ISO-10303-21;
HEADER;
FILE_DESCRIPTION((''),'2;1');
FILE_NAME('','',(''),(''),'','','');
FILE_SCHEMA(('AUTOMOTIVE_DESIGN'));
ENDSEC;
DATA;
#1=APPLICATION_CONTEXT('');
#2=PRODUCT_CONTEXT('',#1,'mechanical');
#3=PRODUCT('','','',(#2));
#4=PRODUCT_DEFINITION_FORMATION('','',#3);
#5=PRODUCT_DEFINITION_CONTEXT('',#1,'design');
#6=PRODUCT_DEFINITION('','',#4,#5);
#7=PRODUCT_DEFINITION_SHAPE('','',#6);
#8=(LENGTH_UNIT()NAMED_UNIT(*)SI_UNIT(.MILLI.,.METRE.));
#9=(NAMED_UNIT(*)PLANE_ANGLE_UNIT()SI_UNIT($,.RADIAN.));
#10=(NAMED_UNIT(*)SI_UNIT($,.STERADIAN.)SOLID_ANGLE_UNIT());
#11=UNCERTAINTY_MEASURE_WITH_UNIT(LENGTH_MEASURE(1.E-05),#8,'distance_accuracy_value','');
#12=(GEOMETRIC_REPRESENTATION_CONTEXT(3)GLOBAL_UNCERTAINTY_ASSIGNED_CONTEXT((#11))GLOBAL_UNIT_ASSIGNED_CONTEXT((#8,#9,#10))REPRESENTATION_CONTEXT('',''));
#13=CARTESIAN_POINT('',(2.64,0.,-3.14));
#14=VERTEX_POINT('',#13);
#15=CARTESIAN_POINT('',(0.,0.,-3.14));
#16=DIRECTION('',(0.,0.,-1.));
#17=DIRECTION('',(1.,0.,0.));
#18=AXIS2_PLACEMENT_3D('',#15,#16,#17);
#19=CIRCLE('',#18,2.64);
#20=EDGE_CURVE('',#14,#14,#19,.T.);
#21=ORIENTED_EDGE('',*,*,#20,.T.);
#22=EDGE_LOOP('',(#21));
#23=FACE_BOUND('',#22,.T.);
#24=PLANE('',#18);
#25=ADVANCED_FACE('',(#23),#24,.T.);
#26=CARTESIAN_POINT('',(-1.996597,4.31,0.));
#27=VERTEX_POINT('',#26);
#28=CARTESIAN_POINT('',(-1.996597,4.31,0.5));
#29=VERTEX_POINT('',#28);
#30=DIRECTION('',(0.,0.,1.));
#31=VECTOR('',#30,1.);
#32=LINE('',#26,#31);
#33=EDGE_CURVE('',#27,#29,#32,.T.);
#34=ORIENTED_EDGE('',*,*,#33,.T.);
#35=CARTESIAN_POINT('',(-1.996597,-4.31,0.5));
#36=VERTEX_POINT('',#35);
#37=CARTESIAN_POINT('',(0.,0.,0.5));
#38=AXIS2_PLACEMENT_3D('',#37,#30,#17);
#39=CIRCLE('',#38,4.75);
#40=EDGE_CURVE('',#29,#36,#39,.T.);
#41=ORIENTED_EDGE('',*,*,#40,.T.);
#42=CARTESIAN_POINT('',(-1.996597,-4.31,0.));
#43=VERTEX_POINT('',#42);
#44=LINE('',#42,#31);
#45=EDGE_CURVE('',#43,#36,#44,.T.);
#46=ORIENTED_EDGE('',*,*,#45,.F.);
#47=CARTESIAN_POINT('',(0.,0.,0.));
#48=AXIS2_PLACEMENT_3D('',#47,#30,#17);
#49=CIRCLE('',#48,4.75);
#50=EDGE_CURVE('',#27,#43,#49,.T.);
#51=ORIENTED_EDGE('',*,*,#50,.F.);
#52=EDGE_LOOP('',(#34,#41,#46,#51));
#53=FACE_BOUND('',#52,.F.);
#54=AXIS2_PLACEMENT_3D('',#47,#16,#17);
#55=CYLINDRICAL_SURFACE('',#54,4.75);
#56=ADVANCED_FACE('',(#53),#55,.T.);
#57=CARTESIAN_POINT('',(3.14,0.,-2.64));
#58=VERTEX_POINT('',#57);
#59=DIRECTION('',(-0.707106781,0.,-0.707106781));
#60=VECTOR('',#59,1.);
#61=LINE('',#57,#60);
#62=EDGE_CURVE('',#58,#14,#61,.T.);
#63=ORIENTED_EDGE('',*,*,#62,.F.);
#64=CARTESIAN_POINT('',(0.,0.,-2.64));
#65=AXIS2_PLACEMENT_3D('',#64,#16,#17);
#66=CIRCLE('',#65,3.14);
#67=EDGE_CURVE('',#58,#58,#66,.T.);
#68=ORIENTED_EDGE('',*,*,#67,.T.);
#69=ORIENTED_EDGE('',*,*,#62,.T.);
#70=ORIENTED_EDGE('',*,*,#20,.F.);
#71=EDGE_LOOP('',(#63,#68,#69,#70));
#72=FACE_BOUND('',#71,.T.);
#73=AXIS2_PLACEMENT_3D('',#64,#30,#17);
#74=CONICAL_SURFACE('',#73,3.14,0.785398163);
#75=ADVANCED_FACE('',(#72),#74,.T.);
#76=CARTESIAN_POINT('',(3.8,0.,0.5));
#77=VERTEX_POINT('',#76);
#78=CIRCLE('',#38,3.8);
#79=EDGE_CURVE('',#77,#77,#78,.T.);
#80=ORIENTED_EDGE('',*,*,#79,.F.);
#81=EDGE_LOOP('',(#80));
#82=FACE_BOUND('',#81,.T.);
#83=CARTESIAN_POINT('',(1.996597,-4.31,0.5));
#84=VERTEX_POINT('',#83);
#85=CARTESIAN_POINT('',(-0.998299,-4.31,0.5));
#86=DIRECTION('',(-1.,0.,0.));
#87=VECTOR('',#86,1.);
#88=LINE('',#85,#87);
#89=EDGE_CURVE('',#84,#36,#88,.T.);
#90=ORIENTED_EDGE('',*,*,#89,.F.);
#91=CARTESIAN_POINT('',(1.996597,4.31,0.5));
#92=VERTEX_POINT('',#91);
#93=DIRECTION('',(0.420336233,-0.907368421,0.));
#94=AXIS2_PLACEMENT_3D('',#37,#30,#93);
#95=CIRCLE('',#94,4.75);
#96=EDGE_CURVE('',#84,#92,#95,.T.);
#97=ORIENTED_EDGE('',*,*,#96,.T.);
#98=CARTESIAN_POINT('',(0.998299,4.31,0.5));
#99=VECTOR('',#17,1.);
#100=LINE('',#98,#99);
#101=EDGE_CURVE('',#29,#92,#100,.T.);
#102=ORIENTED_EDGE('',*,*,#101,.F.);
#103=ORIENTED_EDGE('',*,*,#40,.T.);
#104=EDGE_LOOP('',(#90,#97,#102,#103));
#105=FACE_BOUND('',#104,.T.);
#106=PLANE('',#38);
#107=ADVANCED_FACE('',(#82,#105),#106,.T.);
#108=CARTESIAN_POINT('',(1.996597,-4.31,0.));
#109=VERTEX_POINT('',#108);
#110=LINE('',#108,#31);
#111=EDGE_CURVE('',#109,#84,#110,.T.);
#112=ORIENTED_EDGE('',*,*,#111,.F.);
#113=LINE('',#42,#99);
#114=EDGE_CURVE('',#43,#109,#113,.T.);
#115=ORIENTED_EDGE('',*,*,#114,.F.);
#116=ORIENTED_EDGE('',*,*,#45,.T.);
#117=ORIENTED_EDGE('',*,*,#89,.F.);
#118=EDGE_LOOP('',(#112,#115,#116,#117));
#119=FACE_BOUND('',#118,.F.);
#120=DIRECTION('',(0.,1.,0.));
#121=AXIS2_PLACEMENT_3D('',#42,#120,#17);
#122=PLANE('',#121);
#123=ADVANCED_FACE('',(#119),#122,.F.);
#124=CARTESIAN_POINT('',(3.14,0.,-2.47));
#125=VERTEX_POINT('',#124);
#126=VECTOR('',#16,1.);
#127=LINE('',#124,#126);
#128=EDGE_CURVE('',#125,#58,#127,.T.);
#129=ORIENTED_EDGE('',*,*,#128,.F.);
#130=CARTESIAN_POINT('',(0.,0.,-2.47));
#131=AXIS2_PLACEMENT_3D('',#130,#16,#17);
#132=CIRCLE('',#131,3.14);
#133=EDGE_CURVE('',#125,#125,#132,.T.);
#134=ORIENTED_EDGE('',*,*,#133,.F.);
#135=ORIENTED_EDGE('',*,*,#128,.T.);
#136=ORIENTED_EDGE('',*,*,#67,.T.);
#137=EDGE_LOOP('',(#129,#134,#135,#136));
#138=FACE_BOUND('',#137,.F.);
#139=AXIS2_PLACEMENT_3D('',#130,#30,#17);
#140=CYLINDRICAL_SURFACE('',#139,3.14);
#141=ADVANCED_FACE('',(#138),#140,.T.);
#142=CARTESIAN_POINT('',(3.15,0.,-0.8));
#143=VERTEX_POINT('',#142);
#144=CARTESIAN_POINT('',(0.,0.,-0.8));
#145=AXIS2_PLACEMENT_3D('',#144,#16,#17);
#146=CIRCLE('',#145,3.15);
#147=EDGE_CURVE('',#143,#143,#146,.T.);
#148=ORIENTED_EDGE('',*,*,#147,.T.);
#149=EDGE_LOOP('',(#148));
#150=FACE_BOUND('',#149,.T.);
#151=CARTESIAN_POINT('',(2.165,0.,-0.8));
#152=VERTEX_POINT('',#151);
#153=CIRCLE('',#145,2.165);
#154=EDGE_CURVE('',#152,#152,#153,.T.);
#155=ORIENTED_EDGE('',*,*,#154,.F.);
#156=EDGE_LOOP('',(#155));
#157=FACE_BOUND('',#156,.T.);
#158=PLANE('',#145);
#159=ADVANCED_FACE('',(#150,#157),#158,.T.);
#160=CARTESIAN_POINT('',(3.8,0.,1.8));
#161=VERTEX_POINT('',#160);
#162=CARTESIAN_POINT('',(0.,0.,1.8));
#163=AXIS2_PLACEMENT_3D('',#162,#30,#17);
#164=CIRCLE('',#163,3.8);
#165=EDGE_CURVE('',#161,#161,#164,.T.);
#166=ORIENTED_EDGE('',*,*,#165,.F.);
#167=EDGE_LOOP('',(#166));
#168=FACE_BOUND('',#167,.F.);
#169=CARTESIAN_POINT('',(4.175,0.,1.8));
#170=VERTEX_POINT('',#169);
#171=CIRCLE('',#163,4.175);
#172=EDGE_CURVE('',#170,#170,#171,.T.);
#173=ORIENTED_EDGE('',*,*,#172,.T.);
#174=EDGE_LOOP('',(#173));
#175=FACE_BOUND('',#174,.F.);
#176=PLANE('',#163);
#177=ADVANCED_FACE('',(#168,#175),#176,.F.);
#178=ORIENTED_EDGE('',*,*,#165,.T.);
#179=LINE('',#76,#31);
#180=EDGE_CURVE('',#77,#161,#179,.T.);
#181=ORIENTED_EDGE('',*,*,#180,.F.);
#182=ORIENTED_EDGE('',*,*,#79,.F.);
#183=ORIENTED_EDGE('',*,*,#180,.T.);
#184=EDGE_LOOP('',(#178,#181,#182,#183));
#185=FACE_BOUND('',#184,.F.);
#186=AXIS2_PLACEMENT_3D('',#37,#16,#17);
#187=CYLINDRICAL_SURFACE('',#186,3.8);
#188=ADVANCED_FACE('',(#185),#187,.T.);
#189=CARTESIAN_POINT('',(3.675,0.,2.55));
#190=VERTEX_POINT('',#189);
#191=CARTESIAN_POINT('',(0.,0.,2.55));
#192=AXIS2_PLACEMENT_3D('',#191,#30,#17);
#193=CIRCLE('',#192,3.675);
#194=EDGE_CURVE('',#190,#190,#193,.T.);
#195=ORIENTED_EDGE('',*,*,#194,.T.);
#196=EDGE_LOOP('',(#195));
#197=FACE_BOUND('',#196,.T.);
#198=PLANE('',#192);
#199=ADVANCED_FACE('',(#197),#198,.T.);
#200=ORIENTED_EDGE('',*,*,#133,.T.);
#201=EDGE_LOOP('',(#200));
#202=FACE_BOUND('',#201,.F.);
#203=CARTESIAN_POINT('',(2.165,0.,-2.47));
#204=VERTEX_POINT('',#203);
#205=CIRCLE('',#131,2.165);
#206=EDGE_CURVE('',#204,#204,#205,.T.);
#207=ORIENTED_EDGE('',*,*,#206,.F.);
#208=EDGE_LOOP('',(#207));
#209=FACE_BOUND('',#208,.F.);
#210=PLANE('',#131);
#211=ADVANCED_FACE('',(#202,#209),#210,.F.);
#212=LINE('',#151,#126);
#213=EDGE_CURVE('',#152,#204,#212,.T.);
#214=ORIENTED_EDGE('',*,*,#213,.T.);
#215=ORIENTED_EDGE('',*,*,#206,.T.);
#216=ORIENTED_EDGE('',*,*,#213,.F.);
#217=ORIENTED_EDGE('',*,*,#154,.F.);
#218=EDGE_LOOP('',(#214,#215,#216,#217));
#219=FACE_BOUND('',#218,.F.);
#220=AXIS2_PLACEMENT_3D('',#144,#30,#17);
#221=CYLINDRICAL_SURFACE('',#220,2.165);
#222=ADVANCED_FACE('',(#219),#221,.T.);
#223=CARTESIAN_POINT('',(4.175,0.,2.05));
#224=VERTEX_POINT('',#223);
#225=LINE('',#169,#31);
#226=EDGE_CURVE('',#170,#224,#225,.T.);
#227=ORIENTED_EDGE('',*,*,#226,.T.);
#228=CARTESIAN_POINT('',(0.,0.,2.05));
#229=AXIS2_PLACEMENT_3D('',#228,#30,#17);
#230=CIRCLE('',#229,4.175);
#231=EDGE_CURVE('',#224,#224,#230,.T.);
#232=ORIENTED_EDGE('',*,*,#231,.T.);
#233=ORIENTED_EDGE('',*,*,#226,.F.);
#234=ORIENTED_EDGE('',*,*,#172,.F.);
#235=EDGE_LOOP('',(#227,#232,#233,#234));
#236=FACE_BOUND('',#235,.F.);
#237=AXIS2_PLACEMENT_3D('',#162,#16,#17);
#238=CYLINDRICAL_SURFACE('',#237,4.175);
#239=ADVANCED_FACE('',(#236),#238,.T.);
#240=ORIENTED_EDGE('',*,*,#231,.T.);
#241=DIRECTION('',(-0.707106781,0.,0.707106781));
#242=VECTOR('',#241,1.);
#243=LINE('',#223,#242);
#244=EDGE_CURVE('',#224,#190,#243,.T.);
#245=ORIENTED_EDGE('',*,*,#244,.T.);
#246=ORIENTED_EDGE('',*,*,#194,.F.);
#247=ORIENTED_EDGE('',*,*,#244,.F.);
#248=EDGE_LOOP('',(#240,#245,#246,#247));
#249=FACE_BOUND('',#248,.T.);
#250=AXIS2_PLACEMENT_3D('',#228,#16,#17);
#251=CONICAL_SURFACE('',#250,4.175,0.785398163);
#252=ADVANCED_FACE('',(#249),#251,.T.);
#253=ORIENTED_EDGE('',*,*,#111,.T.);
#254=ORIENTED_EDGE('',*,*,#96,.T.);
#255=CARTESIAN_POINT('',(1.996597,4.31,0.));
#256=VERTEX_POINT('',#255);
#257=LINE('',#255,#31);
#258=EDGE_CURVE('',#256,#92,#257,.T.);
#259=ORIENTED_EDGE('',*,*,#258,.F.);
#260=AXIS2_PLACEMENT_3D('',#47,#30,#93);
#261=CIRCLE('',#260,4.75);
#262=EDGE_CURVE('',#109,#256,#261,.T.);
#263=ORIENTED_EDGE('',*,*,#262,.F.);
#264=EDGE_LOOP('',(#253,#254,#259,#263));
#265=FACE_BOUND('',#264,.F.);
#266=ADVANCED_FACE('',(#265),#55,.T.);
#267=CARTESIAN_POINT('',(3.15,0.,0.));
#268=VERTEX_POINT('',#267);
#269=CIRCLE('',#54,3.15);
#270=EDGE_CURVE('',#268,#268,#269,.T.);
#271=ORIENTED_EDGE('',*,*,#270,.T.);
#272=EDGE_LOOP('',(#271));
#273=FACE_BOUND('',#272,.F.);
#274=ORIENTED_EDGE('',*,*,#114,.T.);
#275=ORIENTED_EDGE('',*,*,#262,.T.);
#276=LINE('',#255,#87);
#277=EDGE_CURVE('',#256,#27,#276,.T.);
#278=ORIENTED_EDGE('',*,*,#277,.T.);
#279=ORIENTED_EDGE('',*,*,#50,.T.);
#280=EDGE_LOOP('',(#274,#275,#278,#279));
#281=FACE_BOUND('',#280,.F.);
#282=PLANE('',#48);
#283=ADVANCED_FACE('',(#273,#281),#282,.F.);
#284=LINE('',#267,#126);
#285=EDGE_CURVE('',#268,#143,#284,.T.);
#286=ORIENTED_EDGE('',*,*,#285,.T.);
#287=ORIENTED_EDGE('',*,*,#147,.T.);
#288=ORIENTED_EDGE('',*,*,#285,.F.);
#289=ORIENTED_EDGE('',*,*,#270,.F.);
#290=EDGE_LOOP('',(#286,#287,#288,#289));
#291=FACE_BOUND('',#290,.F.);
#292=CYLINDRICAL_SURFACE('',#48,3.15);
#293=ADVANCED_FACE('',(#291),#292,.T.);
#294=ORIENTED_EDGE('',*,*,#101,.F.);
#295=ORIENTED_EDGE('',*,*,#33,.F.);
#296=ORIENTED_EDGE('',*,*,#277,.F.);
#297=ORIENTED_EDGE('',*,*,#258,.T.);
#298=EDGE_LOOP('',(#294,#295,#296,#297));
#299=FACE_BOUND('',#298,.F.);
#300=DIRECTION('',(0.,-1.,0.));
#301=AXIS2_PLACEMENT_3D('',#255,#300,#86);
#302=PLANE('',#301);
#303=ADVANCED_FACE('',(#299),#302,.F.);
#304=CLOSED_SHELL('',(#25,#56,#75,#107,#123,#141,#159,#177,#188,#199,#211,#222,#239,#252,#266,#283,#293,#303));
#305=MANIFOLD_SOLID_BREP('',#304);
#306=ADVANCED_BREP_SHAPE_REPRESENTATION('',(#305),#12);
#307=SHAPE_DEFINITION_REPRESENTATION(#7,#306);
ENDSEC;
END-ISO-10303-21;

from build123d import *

# Parameters (mm, degrees)
F0_R      = 4.75
F1_DEPTH  = 0.5
F2_R      = 3.8
F3_DEPTH  = 1.3
F4_R      = 4.175
F4_R_2    = 3.8
F5_DEPTH  = 0.75
F6_SIZE   = 0.5
F8_DEPTH  = 2.551
F9_R      = 3.15
F10_DEPTH = 0.8
F11_R     = 2.165
F12_DEPTH = 1.67
F13_R     = 3.14
F14_DEPTH = 0.67
F15_SIZE  = 0.5


with BuildPart() as f1:
    # F0 (on Top) → F1 (new body)
    with BuildSketch(Plane.XY):
        Circle(F0_R)
    extrude(amount=F1_DEPTH)

    # F2 (on face) → F3 (join)
    with BuildSketch(Plane.XY.offset(0.5)):
        Circle(F2_R)
    extrude(amount=F3_DEPTH)

    # F4 (on face) → F5 (join)
    with BuildSketch(Plane.XY.offset(1.8)):
        Circle(F4_R)
        Circle(F4_R_2, mode=Mode.SUBTRACT)
        Circle(F4_R_2)
    extrude(amount=F5_DEPTH)

    # F6
    f6_edges = [f1.edges().sort_by_distance(p)[0] for p in [
        (-4.175, 0, 2.55),
    ]]
    chamfer(f6_edges, length=F6_SIZE)

    # F7 (on face) → F8 (cut, through all)
    with BuildSketch(Plane(origin=(0, 0, 0), x_dir=(1, 0, 0), z_dir=(0, 0, -1))):
        with BuildLine():
            Line((-1.9965971051, 4.31), (0, 4.31))
            Line((0, 4.31), (1.9965971051, 4.31))
            ThreePointArc((1.9965971051, 4.31), (0, 4.75), (-1.9965971051, 4.31))
        make_face()
        with BuildLine():
            Line((0, -4.31), (-1.9965971051, -4.31))
            ThreePointArc((-1.9965971051, -4.31), (0, -4.75), (1.9965971051, -4.31))
            Line((1.9965971051, -4.31), (0, -4.31))
        make_face()
    extrude(amount=-F8_DEPTH, mode=Mode.SUBTRACT)

    # F9 (on face) → F10 (join)
    with BuildSketch(Plane(origin=(0, 0, 0), x_dir=(1, 0, 0), z_dir=(0, 0, -1))):
        Circle(F9_R)
    extrude(amount=F10_DEPTH)

    # F11 (on face) → F12 (join)
    with BuildSketch(Plane(origin=(0, 0, -0.8), x_dir=(1, 0, 0), z_dir=(0, 0, -1))):
        Circle(F11_R)
    extrude(amount=F12_DEPTH)

    # F13 (on face) → F14 (join)
    with BuildSketch(Plane(origin=(0, 0, -2.47), x_dir=(1, 0, 0), z_dir=(0, 0, -1))):
        Circle(F13_R)
    extrude(amount=F14_DEPTH)

    # F15
    f15_edges = [f1.edges().sort_by_distance(p)[0] for p in [
        (-3.14, 0, -3.14),
    ]]
    chamfer(f15_edges, length=F15_SIZE)


solid = f1.part
